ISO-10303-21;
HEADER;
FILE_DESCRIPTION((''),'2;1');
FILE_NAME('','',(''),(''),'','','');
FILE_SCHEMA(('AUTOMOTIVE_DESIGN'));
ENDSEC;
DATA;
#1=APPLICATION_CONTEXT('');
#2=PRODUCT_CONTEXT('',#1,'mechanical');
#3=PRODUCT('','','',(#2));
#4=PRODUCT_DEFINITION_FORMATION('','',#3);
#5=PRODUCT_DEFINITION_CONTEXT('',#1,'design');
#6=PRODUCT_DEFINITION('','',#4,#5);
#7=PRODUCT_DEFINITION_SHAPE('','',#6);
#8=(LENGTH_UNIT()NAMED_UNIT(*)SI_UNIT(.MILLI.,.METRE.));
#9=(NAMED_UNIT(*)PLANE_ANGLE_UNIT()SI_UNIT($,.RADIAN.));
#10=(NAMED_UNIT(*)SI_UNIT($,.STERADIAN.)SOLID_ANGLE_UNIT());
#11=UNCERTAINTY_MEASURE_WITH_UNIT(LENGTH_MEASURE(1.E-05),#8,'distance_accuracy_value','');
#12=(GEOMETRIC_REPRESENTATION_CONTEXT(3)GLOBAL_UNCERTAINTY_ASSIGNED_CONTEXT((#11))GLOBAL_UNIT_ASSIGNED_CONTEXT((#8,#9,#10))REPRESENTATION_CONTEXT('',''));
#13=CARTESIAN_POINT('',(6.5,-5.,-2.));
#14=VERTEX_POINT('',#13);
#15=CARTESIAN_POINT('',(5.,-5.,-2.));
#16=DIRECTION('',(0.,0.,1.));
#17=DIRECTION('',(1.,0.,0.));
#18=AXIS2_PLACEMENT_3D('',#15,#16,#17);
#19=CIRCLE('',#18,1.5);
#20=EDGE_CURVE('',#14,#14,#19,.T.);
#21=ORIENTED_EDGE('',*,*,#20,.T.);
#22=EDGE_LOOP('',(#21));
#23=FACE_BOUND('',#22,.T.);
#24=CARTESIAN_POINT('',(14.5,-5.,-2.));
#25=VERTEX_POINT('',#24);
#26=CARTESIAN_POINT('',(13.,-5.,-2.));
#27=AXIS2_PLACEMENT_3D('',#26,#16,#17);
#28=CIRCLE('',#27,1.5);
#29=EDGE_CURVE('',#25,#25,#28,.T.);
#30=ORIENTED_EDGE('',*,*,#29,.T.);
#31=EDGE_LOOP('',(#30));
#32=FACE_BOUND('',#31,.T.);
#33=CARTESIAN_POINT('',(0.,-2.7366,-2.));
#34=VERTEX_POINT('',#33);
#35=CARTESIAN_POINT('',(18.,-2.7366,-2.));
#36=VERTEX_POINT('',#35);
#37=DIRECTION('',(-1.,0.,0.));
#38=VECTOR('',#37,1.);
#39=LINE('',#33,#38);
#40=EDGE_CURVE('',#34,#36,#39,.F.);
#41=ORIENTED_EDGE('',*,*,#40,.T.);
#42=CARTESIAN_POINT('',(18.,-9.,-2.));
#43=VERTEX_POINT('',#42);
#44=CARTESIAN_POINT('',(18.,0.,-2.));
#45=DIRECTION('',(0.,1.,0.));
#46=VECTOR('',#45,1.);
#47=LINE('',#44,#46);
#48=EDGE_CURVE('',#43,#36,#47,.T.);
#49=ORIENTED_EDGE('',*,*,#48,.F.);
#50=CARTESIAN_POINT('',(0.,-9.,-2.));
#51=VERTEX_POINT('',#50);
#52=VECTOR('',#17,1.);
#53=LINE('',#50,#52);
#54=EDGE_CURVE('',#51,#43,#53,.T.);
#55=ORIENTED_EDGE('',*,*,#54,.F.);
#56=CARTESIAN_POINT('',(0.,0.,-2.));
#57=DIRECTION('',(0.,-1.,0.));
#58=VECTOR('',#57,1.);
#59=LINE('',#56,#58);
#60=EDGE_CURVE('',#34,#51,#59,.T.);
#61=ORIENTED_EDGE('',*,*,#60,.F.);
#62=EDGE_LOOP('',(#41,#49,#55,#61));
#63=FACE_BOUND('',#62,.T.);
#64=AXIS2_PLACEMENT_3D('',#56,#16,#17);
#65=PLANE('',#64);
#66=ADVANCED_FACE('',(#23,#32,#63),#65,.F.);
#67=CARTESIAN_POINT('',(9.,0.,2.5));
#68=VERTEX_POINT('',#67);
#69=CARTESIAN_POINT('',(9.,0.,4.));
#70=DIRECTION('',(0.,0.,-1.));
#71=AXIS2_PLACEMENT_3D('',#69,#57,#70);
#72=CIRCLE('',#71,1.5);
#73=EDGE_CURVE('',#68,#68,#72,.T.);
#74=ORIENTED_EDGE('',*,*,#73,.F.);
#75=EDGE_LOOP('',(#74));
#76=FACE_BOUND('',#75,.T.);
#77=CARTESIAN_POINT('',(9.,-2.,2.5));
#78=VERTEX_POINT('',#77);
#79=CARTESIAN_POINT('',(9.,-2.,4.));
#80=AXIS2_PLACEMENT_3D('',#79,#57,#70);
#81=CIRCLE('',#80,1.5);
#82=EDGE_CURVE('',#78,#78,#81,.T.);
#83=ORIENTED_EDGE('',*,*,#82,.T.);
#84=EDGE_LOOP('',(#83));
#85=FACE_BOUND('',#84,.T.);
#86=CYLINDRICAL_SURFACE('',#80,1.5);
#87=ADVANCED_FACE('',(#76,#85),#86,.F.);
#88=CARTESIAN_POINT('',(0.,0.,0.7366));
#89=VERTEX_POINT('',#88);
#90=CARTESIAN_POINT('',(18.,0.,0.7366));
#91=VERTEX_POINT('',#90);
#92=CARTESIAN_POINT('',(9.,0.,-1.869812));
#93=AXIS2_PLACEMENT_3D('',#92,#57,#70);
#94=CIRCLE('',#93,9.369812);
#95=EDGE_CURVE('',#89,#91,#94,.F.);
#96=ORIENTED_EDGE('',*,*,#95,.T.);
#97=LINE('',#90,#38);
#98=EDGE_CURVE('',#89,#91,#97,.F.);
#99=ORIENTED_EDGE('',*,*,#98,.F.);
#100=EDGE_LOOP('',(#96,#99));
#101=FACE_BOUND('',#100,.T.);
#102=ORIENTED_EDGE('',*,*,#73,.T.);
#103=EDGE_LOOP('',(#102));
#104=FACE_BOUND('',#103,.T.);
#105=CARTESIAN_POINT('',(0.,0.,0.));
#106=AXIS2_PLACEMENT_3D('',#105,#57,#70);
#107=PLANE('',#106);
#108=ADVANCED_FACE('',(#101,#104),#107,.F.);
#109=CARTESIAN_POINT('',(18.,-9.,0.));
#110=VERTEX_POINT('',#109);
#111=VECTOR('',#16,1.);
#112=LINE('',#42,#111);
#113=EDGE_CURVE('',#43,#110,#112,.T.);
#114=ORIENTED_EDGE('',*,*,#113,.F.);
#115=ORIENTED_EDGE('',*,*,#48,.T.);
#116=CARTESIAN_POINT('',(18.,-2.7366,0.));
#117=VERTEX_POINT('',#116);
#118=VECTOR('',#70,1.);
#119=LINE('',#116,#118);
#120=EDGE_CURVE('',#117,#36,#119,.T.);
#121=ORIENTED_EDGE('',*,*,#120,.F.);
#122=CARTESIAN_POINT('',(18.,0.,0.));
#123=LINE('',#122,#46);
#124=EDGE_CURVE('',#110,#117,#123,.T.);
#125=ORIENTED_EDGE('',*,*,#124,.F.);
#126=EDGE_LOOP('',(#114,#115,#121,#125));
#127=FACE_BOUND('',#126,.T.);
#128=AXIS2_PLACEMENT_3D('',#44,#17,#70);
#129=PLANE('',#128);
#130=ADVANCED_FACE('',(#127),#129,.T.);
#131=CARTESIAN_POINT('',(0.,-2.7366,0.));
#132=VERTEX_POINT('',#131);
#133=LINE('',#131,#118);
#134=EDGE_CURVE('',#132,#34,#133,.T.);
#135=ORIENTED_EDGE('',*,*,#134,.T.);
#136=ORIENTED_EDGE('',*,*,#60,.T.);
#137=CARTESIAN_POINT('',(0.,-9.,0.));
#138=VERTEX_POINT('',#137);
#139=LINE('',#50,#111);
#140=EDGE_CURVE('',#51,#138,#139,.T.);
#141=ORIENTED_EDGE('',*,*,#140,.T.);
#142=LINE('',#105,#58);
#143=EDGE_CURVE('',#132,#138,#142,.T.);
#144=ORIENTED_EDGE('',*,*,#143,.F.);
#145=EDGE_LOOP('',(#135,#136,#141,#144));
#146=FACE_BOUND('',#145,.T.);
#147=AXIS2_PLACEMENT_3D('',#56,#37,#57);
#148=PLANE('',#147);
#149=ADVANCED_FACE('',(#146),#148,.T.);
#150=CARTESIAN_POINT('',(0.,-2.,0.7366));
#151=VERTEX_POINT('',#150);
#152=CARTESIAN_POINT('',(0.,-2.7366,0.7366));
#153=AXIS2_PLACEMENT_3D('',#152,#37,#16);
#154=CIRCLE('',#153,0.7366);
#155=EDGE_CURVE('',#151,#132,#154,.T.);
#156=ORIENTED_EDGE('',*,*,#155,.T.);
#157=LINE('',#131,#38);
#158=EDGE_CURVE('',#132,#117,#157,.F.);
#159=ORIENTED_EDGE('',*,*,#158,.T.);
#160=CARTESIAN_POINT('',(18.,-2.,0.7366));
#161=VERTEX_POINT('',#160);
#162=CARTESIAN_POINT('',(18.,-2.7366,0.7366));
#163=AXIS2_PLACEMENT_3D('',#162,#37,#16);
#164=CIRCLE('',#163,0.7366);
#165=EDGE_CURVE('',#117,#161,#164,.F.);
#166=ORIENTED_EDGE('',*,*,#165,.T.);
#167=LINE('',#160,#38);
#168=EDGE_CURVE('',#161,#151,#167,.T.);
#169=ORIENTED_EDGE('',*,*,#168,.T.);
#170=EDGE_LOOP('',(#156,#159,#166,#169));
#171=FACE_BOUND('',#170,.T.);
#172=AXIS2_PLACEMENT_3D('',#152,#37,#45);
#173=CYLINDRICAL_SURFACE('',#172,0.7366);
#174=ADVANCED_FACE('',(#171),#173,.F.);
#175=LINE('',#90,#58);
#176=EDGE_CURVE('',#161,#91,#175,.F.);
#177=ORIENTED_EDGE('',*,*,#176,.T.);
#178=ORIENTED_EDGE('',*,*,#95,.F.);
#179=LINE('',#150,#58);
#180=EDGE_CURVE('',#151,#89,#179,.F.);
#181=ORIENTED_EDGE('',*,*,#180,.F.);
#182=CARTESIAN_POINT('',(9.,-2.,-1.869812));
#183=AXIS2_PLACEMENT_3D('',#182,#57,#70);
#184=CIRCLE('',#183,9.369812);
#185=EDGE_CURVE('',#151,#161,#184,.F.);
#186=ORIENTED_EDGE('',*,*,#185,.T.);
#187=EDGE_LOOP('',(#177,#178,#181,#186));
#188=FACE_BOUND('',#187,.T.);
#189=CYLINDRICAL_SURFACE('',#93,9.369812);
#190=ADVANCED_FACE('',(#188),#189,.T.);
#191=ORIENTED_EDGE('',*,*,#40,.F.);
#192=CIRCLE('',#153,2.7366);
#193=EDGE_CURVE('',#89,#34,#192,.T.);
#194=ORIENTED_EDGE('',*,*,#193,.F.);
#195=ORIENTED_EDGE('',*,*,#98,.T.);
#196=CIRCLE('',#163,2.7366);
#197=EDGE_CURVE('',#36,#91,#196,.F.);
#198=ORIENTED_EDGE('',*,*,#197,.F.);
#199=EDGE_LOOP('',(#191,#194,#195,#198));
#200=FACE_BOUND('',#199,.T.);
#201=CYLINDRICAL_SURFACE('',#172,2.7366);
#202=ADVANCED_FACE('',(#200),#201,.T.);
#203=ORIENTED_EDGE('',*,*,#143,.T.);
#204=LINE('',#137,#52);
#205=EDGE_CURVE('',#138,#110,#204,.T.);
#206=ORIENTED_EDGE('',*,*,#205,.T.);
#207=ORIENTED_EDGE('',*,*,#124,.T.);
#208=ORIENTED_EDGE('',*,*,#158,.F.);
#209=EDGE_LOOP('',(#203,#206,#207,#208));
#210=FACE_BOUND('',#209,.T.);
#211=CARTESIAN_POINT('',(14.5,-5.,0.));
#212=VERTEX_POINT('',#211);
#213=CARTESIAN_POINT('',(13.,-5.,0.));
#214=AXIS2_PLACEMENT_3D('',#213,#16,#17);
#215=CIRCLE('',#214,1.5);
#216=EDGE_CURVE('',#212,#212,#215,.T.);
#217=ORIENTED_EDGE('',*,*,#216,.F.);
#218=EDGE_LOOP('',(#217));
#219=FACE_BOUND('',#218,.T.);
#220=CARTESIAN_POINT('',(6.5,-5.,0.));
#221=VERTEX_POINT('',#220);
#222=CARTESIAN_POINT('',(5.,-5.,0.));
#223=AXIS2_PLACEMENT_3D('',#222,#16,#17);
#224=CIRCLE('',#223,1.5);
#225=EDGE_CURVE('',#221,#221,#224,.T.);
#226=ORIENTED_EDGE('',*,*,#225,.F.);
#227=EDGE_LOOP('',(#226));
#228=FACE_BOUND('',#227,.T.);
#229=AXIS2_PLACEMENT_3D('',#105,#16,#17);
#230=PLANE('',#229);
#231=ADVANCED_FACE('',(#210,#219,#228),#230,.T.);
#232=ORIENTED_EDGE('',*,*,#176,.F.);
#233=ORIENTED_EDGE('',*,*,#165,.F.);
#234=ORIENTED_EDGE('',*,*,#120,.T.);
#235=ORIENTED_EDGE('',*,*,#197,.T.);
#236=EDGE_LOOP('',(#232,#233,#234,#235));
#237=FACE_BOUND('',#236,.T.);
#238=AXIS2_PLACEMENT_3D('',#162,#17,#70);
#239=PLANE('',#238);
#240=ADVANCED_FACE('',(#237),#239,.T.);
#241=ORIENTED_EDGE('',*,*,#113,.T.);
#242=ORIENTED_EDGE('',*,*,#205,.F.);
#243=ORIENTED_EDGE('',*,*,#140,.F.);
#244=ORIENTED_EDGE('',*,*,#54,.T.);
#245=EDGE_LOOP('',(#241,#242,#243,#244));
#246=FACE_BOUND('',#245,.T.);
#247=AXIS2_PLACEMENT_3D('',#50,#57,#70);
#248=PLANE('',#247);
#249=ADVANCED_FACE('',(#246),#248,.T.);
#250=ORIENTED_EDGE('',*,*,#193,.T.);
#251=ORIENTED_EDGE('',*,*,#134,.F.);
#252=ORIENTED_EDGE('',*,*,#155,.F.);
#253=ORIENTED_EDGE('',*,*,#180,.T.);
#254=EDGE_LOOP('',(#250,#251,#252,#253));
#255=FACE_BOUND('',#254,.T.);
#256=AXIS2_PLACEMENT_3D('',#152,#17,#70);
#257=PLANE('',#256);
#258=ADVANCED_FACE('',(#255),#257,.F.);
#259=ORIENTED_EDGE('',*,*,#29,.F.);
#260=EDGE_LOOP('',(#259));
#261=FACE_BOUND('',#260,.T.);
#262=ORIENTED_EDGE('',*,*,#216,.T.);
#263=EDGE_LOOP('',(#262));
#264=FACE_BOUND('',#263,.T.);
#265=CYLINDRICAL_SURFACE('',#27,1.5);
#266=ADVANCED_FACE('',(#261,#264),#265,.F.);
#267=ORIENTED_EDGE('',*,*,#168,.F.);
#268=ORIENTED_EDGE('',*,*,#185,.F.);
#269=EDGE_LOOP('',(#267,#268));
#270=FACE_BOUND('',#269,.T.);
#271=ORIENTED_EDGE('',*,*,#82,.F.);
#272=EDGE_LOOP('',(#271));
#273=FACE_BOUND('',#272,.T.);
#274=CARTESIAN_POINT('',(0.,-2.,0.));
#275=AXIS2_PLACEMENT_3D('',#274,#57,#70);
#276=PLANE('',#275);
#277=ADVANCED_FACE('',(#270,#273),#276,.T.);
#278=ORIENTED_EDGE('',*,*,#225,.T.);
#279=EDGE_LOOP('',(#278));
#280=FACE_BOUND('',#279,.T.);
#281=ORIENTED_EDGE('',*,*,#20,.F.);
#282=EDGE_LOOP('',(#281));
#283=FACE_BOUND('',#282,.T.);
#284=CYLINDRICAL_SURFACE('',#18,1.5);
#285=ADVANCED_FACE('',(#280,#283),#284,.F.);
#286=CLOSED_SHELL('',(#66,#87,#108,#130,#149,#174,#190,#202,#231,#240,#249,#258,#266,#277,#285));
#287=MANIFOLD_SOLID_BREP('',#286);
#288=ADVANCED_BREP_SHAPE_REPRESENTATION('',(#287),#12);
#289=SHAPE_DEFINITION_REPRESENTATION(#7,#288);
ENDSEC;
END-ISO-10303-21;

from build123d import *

# Parameters (mm, degrees)
SKETCH_1_W                       = 18
SKETCH_1_H                       = 9
SKETCH_1_R                       = 1.5
SM_BASE_FLANGE_1_DEPTH           = 2
SM_EDGE_FLANGE_1_STRIP_W         = 9.4732
SM_EDGE_FLANGE_1_STRIP_H         = 2
SM_EDGE_FLANGE_1_STRIP_CUT_DEPTH = 18
SM_EDGE_FLANGE_1_DEPTH           = 18
SKETCH_9_R                       = 1.5
CUT_EXTRUDE_1_DEPTH              = 10


# Sheet-metal steps are written as plain solids
with BuildPart() as part:
    # Sketch 1 → 基体-法兰1 (new body)
    with BuildSketch(Plane.XY):
        with Locations((9, -4.5)):
            Rectangle(SKETCH_1_W, SKETCH_1_H)
        with Locations((5, -5)):
            Circle(SKETCH_1_R, mode=Mode.SUBTRACT)
        with Locations((13, -5)):
            Circle(SKETCH_1_R, mode=Mode.SUBTRACT)
    extrude(amount=-SM_BASE_FLANGE_1_DEPTH)

    # 边线-法兰1 strip (across the edge) → 边线-法兰1 strip cut (cut)
    with BuildSketch(Plane(origin=(18, 0, 0), x_dir=(0, -1, 0), z_dir=(-1, 0, 0))):
        with Locations((-2, -1)):
            Rectangle(SM_EDGE_FLANGE_1_STRIP_W, SM_EDGE_FLANGE_1_STRIP_H)
    extrude(amount=SM_EDGE_FLANGE_1_STRIP_CUT_DEPTH, mode=Mode.SUBTRACT)

    # 边线-法兰1 section (across the edge) → 边线-法兰1 (add)
    with BuildSketch(Plane(origin=(18, 0, 0), x_dir=(0, -1, 0), z_dir=(-1, 0, 0))):
        with BuildLine():
            Line((0, 0.7366), (0, 18))
            Line((0, 18), (2, 18))
            Line((2, 18), (2, 0.7366))
            ThreePointArc((2, 0.7366), (2.215745145, 0.215745145), (2.7366, 0))
            Line((2.7366, 0), (2.7366, -2))
            ThreePointArc((2.7366, -2), (0.801531583, -1.198468417), (0, 0.7366))
        make_face()
    extrude(amount=SM_EDGE_FLANGE_1_DEPTH)

    # 草图9 → 切除-拉伸1 (cut)
    with BuildSketch(Plane.XZ.offset(2)):
        with Locations(Location((9, 4, 0), (0, 0, 270))):
            Circle(SKETCH_9_R)
        with BuildLine():
            Line((18, 0.7366), (18, 18))
            Line((18, 18), (0, 18))
            Line((0, 18), (0, 0.7366))
            ThreePointArc((0, 0.7366), (9, 7.5), (18, 0.7366))
        make_face()
    extrude(amount=-CUT_EXTRUDE_1_DEPTH, mode=Mode.SUBTRACT)


solid = part.part
